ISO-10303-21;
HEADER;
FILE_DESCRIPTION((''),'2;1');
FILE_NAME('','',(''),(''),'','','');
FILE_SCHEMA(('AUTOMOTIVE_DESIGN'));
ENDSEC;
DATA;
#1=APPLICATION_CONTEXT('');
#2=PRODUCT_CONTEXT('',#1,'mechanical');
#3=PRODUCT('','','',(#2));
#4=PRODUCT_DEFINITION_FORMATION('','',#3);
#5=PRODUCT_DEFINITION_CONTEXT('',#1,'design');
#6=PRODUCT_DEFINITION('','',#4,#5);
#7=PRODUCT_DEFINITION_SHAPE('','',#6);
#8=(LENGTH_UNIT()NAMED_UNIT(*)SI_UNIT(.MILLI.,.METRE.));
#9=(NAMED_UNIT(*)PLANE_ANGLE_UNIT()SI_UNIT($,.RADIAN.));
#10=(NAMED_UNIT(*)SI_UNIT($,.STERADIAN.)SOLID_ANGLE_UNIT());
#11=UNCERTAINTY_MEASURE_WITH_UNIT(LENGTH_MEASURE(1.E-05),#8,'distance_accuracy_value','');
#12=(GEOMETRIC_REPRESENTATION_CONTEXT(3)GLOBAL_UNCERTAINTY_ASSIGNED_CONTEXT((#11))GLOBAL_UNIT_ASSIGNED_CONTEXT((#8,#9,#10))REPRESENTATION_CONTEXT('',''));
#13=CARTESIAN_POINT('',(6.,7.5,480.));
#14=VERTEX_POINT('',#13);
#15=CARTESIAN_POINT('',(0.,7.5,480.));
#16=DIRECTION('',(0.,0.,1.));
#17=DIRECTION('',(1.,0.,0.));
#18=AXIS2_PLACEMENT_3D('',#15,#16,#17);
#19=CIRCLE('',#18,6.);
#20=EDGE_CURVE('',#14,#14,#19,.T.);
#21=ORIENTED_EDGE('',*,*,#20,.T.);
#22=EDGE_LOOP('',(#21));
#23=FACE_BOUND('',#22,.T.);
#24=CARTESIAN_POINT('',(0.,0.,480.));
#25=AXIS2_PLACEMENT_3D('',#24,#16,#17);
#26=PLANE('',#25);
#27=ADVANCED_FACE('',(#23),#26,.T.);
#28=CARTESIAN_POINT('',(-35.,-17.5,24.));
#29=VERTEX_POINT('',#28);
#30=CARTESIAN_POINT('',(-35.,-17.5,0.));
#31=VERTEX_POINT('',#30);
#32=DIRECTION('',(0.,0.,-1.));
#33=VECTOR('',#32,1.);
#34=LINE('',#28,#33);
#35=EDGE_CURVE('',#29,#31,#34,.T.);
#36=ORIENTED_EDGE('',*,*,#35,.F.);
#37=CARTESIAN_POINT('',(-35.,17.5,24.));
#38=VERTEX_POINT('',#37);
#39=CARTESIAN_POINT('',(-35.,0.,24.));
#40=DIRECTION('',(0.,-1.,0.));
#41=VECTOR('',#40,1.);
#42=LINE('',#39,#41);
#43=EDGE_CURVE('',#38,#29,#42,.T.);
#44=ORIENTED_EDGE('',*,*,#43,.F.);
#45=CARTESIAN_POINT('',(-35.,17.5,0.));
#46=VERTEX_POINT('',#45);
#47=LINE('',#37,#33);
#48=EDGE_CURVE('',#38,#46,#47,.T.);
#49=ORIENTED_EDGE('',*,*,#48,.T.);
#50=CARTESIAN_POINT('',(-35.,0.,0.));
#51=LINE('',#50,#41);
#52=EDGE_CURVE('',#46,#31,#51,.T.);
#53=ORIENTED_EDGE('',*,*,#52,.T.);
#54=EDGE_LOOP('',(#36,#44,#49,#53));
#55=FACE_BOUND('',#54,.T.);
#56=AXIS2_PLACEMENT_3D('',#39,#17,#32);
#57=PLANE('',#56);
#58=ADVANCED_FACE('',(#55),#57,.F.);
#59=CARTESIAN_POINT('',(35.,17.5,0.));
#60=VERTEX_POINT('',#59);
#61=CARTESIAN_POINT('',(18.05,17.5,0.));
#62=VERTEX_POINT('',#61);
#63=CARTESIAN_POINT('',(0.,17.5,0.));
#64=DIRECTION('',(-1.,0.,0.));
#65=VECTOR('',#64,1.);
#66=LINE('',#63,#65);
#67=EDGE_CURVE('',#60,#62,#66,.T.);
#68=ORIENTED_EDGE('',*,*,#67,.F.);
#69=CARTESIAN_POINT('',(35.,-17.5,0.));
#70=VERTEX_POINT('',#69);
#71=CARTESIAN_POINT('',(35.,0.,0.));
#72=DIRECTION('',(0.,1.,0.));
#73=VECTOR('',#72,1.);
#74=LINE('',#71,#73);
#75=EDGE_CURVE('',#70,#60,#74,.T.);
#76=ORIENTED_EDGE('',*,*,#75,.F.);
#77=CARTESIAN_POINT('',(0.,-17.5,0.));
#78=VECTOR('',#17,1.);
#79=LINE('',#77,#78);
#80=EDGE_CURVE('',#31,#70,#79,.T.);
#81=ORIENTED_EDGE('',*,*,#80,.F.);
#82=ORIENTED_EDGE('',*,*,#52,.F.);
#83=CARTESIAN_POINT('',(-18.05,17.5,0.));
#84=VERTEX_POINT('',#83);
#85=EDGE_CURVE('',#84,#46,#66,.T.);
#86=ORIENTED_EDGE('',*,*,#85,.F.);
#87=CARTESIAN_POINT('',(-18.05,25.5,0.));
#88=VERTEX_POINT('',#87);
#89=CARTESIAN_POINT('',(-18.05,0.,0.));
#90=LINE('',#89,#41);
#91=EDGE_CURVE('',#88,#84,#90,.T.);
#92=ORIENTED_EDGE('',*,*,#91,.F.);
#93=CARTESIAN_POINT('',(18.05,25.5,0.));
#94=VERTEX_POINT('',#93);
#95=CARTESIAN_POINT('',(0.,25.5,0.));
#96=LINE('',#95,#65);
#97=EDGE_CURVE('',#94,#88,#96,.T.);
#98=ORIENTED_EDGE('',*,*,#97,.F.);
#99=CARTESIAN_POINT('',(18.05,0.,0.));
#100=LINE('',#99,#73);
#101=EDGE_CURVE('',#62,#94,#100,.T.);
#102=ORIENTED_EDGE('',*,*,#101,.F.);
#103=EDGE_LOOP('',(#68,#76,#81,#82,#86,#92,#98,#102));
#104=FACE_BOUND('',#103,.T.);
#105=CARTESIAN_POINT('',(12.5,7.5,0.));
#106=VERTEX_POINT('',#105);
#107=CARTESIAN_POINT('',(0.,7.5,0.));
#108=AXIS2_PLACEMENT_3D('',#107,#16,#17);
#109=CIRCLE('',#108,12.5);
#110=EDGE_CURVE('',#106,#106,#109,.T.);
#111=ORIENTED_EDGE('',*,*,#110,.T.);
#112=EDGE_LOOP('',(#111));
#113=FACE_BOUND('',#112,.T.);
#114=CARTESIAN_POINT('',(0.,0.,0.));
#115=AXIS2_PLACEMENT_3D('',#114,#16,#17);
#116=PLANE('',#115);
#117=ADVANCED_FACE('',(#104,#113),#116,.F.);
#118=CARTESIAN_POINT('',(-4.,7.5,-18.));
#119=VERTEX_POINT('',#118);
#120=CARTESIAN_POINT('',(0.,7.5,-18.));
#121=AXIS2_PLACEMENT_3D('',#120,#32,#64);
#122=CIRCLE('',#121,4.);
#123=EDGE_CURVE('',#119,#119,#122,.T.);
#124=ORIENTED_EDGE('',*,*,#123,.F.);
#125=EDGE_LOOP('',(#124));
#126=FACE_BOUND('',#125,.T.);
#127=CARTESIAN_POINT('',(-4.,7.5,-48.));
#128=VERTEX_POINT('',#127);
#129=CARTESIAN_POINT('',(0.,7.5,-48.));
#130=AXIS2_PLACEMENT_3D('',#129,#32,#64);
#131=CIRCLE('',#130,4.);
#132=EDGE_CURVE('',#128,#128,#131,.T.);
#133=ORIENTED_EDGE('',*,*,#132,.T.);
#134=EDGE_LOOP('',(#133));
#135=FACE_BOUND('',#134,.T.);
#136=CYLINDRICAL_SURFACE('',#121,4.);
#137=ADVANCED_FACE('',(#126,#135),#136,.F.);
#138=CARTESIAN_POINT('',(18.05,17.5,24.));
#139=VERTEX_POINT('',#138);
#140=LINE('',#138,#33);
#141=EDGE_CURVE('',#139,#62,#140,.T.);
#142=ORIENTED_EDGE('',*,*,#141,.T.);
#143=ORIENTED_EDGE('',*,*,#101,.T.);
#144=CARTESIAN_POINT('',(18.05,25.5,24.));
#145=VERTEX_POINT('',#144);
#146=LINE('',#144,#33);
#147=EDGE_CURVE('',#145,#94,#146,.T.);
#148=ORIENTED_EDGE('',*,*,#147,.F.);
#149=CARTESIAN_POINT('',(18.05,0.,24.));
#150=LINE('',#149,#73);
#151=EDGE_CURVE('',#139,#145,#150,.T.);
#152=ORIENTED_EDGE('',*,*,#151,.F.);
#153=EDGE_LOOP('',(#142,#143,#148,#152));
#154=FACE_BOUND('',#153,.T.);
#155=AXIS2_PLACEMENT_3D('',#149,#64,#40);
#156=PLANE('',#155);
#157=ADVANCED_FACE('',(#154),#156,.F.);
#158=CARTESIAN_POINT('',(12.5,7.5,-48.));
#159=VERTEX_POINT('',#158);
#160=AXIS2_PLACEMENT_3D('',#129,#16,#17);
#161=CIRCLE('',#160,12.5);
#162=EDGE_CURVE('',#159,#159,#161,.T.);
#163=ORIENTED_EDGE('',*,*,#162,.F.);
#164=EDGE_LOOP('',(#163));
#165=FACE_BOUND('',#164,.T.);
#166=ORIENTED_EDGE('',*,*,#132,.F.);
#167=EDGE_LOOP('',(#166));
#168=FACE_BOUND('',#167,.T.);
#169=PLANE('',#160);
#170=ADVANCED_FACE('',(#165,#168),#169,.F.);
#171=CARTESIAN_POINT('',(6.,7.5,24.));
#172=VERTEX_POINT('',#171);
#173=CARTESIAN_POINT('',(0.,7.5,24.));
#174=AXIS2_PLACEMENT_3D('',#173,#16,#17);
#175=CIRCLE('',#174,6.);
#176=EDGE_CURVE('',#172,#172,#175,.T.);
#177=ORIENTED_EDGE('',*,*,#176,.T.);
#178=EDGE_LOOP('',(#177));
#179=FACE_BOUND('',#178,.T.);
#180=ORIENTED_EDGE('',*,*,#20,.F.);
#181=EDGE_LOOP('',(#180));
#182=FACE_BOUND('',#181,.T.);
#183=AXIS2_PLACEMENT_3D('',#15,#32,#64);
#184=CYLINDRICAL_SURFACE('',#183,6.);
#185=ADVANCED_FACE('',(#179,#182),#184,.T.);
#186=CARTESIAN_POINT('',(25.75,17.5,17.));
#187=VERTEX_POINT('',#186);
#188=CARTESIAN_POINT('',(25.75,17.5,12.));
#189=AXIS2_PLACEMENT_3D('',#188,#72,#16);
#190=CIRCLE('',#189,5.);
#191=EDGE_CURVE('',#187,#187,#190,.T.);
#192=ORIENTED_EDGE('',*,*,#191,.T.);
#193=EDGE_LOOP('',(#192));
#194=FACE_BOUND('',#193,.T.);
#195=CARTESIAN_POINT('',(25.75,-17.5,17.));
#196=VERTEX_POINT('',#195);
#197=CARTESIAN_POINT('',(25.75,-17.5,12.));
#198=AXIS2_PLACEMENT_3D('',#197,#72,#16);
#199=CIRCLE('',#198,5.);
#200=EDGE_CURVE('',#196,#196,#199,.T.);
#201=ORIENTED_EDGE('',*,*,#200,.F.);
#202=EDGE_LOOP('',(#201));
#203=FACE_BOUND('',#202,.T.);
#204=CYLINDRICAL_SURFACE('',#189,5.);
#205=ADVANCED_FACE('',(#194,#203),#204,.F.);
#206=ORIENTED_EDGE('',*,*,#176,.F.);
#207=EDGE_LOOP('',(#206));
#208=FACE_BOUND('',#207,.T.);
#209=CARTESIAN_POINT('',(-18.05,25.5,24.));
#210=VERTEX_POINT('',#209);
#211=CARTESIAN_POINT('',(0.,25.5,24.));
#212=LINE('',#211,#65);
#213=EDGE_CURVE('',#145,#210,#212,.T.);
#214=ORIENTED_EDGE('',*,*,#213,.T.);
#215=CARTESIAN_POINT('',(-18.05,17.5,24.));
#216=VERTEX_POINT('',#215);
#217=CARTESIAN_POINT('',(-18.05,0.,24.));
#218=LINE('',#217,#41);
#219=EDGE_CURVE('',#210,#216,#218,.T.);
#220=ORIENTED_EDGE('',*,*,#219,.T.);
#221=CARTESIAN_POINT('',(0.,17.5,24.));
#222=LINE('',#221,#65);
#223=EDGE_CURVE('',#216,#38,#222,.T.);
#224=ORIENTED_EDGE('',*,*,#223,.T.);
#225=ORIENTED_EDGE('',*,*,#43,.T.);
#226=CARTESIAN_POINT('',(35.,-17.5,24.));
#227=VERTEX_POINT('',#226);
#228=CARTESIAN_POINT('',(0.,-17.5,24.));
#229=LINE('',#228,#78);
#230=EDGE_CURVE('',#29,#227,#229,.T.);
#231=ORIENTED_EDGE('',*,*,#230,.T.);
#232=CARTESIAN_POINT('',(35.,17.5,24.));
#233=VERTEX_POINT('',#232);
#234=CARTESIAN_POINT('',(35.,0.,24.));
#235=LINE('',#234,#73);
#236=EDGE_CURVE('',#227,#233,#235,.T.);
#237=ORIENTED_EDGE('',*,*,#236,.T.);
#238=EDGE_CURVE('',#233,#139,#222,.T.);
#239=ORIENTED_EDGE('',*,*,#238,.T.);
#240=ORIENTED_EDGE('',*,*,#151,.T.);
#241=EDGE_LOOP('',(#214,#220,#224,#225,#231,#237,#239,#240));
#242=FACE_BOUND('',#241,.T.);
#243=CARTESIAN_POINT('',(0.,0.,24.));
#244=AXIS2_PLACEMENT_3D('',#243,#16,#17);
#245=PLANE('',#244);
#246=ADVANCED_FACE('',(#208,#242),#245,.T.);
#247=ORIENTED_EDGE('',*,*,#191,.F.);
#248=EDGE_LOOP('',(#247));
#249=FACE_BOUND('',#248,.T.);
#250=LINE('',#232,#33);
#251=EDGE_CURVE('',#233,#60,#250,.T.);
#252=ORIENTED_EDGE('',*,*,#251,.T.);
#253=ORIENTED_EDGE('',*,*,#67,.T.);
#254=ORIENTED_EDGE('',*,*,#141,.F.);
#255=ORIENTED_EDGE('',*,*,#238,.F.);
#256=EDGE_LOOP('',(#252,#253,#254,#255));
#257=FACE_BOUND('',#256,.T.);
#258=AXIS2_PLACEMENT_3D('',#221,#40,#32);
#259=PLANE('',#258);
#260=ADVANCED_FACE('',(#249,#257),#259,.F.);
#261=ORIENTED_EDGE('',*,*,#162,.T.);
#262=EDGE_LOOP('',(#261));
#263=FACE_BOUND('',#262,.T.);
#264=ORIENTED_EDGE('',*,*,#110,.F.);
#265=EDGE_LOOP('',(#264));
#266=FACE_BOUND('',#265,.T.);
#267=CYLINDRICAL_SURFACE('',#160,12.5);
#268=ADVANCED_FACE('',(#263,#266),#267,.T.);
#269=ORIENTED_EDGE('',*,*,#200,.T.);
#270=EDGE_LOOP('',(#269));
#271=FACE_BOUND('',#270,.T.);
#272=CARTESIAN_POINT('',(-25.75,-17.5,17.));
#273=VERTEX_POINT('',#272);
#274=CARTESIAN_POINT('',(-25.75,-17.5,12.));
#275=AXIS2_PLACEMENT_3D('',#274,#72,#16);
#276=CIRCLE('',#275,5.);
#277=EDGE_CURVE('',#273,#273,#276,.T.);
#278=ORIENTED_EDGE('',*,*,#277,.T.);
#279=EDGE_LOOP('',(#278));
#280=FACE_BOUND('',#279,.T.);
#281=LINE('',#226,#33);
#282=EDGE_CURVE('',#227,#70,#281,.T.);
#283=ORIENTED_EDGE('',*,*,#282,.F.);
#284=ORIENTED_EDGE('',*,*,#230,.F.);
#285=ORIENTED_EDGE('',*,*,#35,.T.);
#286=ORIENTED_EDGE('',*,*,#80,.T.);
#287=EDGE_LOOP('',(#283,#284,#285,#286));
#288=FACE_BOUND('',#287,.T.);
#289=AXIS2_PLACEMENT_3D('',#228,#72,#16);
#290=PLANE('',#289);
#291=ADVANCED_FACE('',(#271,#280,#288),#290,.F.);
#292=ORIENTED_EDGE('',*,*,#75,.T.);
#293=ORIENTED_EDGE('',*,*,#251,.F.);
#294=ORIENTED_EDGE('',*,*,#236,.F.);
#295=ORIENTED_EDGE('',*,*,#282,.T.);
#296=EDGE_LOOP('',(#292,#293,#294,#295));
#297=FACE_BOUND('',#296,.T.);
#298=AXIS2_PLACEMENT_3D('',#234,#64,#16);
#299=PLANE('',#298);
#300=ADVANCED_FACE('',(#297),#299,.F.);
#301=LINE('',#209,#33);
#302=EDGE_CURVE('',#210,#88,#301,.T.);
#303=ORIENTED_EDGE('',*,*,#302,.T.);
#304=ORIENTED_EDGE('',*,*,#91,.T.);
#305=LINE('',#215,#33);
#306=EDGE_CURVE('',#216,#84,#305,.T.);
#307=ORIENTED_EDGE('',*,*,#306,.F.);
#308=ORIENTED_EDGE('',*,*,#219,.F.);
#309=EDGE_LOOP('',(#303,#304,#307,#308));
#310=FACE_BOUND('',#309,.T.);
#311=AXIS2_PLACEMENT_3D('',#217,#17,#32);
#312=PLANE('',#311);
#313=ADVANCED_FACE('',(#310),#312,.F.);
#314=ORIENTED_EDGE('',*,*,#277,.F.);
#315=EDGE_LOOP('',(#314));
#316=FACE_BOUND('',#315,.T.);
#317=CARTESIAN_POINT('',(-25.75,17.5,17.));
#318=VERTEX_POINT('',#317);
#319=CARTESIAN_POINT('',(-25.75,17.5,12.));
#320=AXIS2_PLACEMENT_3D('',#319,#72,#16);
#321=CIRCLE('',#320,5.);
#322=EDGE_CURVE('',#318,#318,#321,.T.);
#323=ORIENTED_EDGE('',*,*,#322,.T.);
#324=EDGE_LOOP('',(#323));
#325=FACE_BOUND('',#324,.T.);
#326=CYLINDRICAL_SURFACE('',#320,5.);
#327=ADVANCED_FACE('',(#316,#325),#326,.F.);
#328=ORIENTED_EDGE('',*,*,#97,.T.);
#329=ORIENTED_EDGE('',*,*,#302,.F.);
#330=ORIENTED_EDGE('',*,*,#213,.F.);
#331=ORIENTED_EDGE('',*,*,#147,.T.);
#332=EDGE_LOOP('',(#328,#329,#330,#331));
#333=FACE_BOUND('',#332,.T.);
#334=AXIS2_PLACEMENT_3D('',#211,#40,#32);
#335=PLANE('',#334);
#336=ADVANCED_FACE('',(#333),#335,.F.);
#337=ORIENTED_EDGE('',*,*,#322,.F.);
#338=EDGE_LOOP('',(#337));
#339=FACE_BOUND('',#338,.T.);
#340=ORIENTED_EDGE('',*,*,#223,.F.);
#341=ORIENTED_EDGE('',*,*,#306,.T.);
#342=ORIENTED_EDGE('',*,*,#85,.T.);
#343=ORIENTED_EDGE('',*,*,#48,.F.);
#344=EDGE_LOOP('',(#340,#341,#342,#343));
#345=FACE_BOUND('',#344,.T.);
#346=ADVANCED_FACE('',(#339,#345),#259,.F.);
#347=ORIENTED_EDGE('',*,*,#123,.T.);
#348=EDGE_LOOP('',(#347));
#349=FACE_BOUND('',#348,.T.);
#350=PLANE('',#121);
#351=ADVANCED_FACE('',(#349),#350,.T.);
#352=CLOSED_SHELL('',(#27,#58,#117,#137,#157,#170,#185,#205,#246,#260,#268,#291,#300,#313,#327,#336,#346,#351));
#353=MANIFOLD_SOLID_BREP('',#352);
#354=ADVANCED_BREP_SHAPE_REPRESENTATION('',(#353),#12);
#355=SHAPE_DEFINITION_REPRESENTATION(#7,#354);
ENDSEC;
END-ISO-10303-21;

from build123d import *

# Parameters (mm, degrees)
SKETCH1_R                    = 12.5
SKETCH1_R_2                  = 6
BOSS_EXTRUDE1_DEPTH          = 24
SKETCH1_2_R                  = 6
BOSS_EXTRUDE2_DEPTH          = 480
SKETCH1_4_R                  = 12.5
BOSS_EXTRUDE3_DEPTH          = 48
M8_START                     = -17.5
M8_CLEARANCE_HOLE1_OUTLINE_R = 5
M8_CLEARANCE_HOLE1_DEPTH     = 35
SKETCH4_R                    = 4
CUT_EXTRUDE1_DEPTH           = 30


# Read off the part's stored shape, not the designer's step: M8 Clearance Hole1
with BuildPart() as part:
    # Sketch1 → Boss-Extrude1 (new body)
    # profile 1 of 2: a face of its own
    with BuildSketch(Plane.XY):
        Polygon((18.05, 17.5), (18.05, 25.5), (-18.05, 25.5), (-18.05, 17.5), (-35, 17.5), (-35, -17.5), (35, -17.5), (35, 17.5), align=None)
        with Locations((0, 7.5)):
            Circle(SKETCH1_R, mode=Mode.SUBTRACT)
    # profile 2 of 2: a face of its own
    with BuildSketch(Plane.XY):
        with Locations((0, 7.5)):
            Circle(SKETCH1_R)
        with Locations((0, 7.5)):
            Circle(SKETCH1_R_2, mode=Mode.SUBTRACT)
    extrude(amount=BOSS_EXTRUDE1_DEPTH)

    # Sketch1<2> → Boss-Extrude2 (add)
    with BuildSketch(Plane.XY):
        with Locations((0, 7.5)):
            Circle(SKETCH1_2_R)
    extrude(amount=BOSS_EXTRUDE2_DEPTH)

    # Sketch1<4> → Boss-Extrude3 (add)
    with BuildSketch(Plane.XY):
        with Locations((0, 7.5)):
            Circle(SKETCH1_4_R)
    extrude(amount=-BOSS_EXTRUDE3_DEPTH)

    # M8 Clearance Hole1 outline → M8 Clearance Hole1 (cut)
    with BuildSketch(Plane(origin=(0, 0, 0), x_dir=(1, 0, 0), z_dir=(0, 1, 0)).offset(M8_START)):
        with Locations((25.75, -12)):
            Circle(M8_CLEARANCE_HOLE1_OUTLINE_R)
        with Locations((-25.75, -12)):
            Circle(M8_CLEARANCE_HOLE1_OUTLINE_R)
    extrude(amount=M8_CLEARANCE_HOLE1_DEPTH, mode=Mode.SUBTRACT)

    # Sketch4 → Cut-Extrude1 (cut)
    with BuildSketch(Plane(origin=(0, 0, -48), x_dir=(-1, 0, 0), z_dir=(0, 0, -1))):
        with Locations((0, 7.5)):
            Circle(SKETCH4_R)
    extrude(amount=-CUT_EXTRUDE1_DEPTH, mode=Mode.SUBTRACT)


solid = part.part
